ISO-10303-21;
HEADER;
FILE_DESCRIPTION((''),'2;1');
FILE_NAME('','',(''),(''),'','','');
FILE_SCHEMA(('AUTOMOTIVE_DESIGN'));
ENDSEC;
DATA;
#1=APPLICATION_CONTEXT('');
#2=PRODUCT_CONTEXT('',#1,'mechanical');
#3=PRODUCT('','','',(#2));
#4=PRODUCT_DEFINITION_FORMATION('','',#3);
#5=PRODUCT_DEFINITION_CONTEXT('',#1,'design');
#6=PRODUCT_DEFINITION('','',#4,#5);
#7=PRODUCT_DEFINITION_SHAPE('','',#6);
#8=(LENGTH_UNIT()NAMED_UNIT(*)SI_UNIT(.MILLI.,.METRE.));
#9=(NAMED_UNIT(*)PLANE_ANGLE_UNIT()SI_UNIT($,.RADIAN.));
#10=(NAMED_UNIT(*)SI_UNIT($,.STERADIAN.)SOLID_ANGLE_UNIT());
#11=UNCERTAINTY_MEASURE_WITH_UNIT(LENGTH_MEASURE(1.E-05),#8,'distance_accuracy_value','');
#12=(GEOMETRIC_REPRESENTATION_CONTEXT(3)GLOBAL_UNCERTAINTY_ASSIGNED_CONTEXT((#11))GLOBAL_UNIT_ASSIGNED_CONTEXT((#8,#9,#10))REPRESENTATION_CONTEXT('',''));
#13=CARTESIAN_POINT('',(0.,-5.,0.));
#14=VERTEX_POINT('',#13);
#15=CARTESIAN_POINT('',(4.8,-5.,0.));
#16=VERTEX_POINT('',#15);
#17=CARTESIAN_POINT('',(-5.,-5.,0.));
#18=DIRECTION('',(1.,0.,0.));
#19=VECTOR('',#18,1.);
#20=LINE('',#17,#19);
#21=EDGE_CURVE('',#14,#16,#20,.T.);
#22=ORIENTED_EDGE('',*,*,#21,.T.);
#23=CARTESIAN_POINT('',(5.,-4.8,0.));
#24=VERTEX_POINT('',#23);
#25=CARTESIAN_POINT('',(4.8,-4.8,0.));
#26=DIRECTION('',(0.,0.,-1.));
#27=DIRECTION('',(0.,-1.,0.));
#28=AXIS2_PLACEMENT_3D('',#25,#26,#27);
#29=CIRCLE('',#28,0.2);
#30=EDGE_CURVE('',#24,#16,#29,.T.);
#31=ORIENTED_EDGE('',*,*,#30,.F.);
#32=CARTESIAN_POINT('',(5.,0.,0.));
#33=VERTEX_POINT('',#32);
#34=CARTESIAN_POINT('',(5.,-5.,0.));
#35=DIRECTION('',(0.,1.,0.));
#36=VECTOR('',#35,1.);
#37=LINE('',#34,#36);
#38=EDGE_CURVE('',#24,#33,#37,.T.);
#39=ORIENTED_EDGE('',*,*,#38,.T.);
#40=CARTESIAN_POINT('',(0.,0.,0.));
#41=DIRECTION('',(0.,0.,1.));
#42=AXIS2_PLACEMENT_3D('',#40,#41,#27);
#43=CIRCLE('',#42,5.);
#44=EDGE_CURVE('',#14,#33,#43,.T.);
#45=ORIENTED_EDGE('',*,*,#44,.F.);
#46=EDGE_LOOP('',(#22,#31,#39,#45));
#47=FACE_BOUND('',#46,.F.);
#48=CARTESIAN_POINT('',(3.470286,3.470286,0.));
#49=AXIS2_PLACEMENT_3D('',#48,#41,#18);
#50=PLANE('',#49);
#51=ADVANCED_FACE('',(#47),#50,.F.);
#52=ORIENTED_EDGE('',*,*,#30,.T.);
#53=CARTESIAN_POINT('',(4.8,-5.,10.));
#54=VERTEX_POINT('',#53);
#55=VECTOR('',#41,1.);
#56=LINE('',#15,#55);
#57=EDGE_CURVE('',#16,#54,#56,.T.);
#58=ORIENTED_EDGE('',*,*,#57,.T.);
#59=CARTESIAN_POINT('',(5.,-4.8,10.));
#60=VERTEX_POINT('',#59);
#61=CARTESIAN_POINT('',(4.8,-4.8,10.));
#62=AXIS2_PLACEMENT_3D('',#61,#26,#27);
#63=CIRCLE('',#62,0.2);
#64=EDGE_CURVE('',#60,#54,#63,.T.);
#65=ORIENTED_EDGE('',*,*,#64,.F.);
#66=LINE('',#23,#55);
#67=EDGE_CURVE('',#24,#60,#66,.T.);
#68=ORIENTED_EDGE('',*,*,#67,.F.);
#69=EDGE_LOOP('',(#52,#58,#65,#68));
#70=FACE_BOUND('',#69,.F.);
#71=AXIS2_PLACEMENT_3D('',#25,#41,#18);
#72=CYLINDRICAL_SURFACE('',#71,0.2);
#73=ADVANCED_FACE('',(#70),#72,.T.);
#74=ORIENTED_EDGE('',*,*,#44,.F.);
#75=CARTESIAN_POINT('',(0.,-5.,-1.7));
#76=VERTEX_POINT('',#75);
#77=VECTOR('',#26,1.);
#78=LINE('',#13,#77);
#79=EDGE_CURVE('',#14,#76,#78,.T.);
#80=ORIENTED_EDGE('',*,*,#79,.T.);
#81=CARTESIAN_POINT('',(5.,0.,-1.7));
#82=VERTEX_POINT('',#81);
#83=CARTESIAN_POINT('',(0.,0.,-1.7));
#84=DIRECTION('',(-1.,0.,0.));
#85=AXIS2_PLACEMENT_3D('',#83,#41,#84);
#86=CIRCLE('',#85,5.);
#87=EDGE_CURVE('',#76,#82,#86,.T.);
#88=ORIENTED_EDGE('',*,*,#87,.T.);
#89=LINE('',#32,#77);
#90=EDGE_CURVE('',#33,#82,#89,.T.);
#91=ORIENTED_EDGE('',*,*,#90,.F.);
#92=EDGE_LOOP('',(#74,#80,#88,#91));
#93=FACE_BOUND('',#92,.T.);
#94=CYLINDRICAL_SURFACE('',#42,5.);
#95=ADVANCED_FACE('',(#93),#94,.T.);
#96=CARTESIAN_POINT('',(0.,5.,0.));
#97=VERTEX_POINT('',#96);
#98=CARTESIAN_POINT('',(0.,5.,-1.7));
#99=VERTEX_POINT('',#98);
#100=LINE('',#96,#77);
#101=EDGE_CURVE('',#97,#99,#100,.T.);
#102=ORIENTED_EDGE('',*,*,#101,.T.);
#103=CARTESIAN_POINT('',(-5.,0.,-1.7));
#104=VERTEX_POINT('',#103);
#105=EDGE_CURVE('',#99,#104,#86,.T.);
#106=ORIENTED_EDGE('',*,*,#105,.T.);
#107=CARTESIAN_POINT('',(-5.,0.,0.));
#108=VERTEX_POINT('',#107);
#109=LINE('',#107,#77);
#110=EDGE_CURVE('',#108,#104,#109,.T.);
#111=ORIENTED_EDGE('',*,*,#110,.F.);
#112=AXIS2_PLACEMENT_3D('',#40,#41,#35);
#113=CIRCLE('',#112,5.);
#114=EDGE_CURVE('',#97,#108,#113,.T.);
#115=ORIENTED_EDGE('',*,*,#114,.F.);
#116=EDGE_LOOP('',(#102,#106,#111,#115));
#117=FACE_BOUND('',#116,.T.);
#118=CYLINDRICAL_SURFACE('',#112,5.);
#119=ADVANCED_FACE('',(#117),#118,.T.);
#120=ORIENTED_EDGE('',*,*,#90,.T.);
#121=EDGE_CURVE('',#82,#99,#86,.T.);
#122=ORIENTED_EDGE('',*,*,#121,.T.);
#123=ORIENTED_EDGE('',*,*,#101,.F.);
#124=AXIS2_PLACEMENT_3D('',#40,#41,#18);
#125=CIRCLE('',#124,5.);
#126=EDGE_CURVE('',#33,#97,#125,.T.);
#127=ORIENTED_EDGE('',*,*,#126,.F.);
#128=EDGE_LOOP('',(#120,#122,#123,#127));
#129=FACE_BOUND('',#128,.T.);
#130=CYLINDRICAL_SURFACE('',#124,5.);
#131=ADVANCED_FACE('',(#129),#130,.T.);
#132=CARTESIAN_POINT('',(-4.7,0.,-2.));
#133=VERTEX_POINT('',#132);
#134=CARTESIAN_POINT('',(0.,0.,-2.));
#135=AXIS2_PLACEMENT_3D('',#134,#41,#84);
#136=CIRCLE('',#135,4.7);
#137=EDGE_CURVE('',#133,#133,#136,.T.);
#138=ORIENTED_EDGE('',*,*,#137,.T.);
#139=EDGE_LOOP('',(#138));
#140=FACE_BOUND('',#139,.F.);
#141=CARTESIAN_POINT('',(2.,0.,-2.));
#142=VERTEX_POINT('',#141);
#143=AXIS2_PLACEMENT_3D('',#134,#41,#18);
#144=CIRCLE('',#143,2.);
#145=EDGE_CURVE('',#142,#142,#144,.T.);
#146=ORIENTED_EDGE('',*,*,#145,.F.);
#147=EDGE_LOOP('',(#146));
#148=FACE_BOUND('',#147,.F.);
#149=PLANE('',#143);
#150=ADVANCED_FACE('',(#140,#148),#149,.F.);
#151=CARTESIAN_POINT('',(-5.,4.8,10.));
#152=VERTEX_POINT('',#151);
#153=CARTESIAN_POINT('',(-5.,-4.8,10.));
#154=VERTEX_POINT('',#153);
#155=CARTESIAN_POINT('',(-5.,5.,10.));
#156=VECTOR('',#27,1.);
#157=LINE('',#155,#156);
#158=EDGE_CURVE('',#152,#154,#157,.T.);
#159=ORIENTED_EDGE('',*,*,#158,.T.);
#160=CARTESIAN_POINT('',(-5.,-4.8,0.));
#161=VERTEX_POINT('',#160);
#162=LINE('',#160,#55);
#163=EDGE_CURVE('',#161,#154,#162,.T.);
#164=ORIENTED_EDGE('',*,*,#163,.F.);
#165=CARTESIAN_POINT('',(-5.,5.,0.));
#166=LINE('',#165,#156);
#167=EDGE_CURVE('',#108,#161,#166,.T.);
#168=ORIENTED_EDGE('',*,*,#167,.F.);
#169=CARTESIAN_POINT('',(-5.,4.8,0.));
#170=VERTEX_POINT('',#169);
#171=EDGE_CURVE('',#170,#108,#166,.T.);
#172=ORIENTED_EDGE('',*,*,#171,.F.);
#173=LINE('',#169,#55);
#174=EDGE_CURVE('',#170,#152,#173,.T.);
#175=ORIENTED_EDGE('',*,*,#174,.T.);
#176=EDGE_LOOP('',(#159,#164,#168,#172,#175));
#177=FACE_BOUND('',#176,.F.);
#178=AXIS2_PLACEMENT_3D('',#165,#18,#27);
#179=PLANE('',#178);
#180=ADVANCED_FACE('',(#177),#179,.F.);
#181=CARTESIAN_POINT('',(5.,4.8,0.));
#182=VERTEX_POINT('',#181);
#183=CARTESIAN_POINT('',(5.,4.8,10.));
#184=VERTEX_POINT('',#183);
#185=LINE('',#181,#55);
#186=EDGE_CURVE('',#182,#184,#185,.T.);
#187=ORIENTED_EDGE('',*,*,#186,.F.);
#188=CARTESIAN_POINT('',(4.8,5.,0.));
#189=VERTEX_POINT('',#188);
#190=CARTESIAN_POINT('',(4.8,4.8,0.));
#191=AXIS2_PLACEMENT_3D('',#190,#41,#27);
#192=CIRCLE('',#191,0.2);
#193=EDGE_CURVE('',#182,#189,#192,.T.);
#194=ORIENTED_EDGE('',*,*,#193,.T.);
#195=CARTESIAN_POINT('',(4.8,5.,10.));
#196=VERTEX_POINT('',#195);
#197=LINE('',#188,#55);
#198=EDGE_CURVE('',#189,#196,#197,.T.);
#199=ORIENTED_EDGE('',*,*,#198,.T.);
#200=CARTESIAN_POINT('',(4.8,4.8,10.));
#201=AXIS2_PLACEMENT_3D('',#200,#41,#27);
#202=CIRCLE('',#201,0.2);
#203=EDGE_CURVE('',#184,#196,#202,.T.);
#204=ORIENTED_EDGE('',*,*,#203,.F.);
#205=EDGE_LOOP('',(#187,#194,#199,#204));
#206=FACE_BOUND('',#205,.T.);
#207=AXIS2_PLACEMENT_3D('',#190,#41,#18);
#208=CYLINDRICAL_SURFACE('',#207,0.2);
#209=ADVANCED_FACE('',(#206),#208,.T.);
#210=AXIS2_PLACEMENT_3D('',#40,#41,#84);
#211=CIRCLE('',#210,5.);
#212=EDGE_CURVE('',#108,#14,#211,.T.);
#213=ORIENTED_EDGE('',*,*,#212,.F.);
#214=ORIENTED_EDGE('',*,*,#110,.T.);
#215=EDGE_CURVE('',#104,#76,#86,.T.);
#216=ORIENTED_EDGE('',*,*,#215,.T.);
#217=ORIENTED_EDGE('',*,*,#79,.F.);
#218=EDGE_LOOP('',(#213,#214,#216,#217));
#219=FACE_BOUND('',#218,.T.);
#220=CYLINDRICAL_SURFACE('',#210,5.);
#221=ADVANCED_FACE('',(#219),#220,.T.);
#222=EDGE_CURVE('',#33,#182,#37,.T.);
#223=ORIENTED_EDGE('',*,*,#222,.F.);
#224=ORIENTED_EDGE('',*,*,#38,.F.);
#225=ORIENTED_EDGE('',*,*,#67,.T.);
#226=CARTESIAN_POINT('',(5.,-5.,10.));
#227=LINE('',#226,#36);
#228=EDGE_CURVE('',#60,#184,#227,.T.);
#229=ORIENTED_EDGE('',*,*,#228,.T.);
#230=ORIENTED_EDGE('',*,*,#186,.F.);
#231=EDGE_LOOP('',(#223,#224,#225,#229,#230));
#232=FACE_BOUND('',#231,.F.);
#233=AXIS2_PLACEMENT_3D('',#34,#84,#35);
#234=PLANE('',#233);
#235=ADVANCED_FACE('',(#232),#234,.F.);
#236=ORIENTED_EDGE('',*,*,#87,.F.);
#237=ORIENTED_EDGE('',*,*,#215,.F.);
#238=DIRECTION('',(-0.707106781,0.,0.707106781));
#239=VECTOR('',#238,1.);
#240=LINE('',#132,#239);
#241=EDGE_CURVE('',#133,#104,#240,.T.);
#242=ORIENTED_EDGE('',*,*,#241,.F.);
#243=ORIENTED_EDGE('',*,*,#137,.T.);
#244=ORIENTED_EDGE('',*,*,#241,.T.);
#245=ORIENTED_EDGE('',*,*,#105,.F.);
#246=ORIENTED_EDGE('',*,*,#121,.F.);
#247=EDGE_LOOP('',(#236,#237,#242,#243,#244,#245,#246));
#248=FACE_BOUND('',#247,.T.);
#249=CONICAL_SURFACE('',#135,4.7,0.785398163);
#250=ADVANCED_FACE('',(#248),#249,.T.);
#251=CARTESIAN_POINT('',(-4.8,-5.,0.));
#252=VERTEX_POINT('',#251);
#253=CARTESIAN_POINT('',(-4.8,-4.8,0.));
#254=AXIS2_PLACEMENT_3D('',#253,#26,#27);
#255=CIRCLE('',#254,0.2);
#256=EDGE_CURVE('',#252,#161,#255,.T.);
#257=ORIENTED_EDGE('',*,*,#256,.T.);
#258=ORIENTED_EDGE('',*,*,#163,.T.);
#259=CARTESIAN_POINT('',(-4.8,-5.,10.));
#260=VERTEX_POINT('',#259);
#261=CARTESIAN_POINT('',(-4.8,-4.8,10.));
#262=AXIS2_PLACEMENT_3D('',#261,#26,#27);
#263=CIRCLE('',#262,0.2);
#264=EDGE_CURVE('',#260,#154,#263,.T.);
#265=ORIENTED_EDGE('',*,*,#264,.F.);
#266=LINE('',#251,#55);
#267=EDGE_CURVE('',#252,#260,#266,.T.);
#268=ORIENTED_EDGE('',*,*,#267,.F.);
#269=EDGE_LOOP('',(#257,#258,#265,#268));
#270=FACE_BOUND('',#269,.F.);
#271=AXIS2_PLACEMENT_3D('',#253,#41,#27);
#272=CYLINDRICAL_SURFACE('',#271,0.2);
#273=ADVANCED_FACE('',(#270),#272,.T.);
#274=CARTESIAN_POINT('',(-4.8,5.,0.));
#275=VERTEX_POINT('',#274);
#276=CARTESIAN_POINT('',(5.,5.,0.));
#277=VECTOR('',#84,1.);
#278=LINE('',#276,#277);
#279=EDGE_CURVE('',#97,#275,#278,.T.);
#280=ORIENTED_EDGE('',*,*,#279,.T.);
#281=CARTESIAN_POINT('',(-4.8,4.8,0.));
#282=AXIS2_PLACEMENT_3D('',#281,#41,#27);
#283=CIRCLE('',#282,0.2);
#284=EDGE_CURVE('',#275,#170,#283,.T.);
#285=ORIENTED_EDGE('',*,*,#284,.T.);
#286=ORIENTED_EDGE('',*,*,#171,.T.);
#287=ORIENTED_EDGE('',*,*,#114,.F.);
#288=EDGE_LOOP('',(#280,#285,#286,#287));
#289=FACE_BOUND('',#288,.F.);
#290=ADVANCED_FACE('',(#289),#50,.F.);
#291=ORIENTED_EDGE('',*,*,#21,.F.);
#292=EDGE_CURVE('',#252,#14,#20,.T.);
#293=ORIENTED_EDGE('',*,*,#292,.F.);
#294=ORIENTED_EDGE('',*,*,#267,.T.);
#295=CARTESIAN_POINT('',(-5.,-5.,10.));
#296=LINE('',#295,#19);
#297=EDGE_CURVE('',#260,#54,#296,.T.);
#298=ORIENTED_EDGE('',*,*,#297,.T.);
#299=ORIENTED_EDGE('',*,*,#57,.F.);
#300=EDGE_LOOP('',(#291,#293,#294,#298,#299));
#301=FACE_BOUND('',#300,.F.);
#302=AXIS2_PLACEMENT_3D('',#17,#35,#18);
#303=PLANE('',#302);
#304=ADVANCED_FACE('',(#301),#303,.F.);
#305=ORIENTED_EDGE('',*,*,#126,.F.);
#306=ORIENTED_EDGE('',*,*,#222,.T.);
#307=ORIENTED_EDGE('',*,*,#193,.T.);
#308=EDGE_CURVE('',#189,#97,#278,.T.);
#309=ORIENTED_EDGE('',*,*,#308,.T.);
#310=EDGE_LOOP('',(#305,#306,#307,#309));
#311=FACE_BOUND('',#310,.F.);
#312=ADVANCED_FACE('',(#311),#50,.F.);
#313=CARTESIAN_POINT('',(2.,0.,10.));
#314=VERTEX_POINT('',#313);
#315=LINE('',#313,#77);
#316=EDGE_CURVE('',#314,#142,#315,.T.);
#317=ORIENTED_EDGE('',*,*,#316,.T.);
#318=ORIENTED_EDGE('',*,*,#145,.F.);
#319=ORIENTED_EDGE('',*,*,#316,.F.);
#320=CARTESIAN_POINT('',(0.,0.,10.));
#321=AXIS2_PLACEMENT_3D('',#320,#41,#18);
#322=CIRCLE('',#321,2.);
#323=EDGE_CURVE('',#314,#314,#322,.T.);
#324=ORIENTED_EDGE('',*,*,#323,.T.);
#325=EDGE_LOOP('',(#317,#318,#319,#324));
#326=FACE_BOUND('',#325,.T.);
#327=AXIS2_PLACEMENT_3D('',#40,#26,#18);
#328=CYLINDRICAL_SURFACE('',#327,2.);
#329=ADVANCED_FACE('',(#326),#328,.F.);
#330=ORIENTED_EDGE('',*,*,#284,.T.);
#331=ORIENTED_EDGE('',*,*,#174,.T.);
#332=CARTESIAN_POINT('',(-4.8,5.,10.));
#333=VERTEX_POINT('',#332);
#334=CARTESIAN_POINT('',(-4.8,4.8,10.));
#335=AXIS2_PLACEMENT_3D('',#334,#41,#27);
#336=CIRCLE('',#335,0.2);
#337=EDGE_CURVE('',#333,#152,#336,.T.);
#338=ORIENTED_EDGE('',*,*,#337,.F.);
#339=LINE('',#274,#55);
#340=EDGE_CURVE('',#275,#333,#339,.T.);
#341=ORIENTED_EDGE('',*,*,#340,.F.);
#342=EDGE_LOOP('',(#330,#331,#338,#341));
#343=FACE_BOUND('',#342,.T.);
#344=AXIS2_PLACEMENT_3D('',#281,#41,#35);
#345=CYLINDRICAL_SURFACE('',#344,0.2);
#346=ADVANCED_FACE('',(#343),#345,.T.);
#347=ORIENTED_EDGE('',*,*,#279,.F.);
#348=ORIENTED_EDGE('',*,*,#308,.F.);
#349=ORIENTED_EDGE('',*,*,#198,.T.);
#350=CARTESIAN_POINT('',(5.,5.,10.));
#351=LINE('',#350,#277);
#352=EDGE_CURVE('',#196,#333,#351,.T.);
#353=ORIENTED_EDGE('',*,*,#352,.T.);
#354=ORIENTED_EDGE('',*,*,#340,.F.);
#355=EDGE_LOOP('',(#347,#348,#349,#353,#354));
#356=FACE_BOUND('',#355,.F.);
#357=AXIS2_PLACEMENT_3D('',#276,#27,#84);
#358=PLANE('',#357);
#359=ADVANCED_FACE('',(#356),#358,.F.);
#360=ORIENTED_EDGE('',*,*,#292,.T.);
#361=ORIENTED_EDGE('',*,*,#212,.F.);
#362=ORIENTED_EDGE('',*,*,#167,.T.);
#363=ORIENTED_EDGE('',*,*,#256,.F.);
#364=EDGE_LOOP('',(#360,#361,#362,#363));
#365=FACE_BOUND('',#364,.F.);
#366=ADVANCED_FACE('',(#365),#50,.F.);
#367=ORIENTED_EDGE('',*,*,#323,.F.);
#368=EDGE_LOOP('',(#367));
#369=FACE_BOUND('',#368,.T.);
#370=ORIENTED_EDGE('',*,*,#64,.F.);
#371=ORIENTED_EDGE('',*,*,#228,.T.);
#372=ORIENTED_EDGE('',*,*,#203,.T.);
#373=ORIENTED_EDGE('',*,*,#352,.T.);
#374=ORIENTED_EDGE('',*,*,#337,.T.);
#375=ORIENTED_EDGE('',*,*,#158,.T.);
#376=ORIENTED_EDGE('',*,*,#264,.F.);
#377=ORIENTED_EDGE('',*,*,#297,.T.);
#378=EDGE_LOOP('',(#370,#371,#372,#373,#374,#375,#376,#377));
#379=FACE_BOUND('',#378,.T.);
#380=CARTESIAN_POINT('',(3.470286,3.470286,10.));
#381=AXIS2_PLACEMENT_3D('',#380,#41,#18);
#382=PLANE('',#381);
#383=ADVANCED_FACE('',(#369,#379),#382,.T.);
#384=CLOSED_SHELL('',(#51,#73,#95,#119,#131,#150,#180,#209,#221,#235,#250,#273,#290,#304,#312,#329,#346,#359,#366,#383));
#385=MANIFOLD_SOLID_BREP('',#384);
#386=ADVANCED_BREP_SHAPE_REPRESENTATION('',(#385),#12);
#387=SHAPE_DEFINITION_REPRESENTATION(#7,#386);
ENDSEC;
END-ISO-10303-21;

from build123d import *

# Parameters (mm, degrees)
F0_R     = 2
F1_DEPTH = 10
F2_DEPTH = 2
F4_R     = 0.2


# Not quite as in the source:
# - a fillet or chamfer that OpenCascade refuses, or shapes differently, is made with other operations: its cross-section is extruded or revolved along the edge and cut away or added


with BuildPart() as f1:
    # F0 (on Top) → F1 (new body)
    with BuildSketch(Plane.XY):
        with BuildLine():
            Line((5, 0), (5, 5))
            Line((5, 5), (0, 5))
            ThreePointArc((0, 5), (3.5355339059, 3.5355339059), (5, 0))
        make_face()
        with BuildLine():
            ThreePointArc((-5, 0), (-3.5355339059, 3.5355339059), (0, 5))
            Line((0, 5), (-5, 5))
            Line((-5, 5), (-5, 0))
        make_face()
        with BuildLine():
            ThreePointArc((5, 0), (3.5355339059, 3.5355339059), (0, 5))
            ThreePointArc((0, 5), (-3.5355339059, 3.5355339059), (-5, 0))
            ThreePointArc((-5, 0), (-3.5355339059, -3.5355339059), (0, -5))
            ThreePointArc((0, -5), (3.5355339059, -3.5355339059), (5, 0))
        make_face()
        Circle(F0_R, mode=Mode.SUBTRACT)
        with BuildLine():
            Line((5, -5), (5, 0))
            ThreePointArc((5, 0), (3.5355339059, -3.5355339059), (0, -5))
            Line((0, -5), (5, -5))
        make_face()
        with BuildLine():
            ThreePointArc((0, -5), (-3.5355339059, -3.5355339059), (-5, 0))
            Line((-5, 0), (-5, -5))
            Line((-5, -5), (0, -5))
        make_face()
    extrude(amount=F1_DEPTH)

    # F0 (on Top) → F2 (join)
    with BuildSketch(Plane.XY):
        with BuildLine():
            ThreePointArc((5, 0), (3.5355339059, 3.5355339059), (0, 5))
            ThreePointArc((0, 5), (-3.5355339059, 3.5355339059), (-5, 0))
            ThreePointArc((-5, 0), (-3.5355339059, -3.5355339059), (0, -5))
            ThreePointArc((0, -5), (3.5355339059, -3.5355339059), (5, 0))
        make_face()
        Circle(F0_R, mode=Mode.SUBTRACT)
    extrude(amount=-F2_DEPTH)

    # F3: chamfer of 0.3 on 1 edges, made by hand

    # F3_s1 → F3_t2 (revolve, cut)
    with BuildSketch(Plane.XZ):
        Polygon((-4.7, -2), (-5, -1.7), (-5, -2), align=None)
    revolve(axis=Axis((0, 0, -2), (0, 0, 1)), mode=Mode.SUBTRACT)

    # F4
    f4_edges = [f1.edges().sort_by_distance(p)[0] for p in [
        (5, 5, 5),
        (5, -5, 5),
        (-5, 5, 5),
        (-5, -5, 5),
    ]]
    fillet(f4_edges, radius=F4_R)


solid = f1.part
